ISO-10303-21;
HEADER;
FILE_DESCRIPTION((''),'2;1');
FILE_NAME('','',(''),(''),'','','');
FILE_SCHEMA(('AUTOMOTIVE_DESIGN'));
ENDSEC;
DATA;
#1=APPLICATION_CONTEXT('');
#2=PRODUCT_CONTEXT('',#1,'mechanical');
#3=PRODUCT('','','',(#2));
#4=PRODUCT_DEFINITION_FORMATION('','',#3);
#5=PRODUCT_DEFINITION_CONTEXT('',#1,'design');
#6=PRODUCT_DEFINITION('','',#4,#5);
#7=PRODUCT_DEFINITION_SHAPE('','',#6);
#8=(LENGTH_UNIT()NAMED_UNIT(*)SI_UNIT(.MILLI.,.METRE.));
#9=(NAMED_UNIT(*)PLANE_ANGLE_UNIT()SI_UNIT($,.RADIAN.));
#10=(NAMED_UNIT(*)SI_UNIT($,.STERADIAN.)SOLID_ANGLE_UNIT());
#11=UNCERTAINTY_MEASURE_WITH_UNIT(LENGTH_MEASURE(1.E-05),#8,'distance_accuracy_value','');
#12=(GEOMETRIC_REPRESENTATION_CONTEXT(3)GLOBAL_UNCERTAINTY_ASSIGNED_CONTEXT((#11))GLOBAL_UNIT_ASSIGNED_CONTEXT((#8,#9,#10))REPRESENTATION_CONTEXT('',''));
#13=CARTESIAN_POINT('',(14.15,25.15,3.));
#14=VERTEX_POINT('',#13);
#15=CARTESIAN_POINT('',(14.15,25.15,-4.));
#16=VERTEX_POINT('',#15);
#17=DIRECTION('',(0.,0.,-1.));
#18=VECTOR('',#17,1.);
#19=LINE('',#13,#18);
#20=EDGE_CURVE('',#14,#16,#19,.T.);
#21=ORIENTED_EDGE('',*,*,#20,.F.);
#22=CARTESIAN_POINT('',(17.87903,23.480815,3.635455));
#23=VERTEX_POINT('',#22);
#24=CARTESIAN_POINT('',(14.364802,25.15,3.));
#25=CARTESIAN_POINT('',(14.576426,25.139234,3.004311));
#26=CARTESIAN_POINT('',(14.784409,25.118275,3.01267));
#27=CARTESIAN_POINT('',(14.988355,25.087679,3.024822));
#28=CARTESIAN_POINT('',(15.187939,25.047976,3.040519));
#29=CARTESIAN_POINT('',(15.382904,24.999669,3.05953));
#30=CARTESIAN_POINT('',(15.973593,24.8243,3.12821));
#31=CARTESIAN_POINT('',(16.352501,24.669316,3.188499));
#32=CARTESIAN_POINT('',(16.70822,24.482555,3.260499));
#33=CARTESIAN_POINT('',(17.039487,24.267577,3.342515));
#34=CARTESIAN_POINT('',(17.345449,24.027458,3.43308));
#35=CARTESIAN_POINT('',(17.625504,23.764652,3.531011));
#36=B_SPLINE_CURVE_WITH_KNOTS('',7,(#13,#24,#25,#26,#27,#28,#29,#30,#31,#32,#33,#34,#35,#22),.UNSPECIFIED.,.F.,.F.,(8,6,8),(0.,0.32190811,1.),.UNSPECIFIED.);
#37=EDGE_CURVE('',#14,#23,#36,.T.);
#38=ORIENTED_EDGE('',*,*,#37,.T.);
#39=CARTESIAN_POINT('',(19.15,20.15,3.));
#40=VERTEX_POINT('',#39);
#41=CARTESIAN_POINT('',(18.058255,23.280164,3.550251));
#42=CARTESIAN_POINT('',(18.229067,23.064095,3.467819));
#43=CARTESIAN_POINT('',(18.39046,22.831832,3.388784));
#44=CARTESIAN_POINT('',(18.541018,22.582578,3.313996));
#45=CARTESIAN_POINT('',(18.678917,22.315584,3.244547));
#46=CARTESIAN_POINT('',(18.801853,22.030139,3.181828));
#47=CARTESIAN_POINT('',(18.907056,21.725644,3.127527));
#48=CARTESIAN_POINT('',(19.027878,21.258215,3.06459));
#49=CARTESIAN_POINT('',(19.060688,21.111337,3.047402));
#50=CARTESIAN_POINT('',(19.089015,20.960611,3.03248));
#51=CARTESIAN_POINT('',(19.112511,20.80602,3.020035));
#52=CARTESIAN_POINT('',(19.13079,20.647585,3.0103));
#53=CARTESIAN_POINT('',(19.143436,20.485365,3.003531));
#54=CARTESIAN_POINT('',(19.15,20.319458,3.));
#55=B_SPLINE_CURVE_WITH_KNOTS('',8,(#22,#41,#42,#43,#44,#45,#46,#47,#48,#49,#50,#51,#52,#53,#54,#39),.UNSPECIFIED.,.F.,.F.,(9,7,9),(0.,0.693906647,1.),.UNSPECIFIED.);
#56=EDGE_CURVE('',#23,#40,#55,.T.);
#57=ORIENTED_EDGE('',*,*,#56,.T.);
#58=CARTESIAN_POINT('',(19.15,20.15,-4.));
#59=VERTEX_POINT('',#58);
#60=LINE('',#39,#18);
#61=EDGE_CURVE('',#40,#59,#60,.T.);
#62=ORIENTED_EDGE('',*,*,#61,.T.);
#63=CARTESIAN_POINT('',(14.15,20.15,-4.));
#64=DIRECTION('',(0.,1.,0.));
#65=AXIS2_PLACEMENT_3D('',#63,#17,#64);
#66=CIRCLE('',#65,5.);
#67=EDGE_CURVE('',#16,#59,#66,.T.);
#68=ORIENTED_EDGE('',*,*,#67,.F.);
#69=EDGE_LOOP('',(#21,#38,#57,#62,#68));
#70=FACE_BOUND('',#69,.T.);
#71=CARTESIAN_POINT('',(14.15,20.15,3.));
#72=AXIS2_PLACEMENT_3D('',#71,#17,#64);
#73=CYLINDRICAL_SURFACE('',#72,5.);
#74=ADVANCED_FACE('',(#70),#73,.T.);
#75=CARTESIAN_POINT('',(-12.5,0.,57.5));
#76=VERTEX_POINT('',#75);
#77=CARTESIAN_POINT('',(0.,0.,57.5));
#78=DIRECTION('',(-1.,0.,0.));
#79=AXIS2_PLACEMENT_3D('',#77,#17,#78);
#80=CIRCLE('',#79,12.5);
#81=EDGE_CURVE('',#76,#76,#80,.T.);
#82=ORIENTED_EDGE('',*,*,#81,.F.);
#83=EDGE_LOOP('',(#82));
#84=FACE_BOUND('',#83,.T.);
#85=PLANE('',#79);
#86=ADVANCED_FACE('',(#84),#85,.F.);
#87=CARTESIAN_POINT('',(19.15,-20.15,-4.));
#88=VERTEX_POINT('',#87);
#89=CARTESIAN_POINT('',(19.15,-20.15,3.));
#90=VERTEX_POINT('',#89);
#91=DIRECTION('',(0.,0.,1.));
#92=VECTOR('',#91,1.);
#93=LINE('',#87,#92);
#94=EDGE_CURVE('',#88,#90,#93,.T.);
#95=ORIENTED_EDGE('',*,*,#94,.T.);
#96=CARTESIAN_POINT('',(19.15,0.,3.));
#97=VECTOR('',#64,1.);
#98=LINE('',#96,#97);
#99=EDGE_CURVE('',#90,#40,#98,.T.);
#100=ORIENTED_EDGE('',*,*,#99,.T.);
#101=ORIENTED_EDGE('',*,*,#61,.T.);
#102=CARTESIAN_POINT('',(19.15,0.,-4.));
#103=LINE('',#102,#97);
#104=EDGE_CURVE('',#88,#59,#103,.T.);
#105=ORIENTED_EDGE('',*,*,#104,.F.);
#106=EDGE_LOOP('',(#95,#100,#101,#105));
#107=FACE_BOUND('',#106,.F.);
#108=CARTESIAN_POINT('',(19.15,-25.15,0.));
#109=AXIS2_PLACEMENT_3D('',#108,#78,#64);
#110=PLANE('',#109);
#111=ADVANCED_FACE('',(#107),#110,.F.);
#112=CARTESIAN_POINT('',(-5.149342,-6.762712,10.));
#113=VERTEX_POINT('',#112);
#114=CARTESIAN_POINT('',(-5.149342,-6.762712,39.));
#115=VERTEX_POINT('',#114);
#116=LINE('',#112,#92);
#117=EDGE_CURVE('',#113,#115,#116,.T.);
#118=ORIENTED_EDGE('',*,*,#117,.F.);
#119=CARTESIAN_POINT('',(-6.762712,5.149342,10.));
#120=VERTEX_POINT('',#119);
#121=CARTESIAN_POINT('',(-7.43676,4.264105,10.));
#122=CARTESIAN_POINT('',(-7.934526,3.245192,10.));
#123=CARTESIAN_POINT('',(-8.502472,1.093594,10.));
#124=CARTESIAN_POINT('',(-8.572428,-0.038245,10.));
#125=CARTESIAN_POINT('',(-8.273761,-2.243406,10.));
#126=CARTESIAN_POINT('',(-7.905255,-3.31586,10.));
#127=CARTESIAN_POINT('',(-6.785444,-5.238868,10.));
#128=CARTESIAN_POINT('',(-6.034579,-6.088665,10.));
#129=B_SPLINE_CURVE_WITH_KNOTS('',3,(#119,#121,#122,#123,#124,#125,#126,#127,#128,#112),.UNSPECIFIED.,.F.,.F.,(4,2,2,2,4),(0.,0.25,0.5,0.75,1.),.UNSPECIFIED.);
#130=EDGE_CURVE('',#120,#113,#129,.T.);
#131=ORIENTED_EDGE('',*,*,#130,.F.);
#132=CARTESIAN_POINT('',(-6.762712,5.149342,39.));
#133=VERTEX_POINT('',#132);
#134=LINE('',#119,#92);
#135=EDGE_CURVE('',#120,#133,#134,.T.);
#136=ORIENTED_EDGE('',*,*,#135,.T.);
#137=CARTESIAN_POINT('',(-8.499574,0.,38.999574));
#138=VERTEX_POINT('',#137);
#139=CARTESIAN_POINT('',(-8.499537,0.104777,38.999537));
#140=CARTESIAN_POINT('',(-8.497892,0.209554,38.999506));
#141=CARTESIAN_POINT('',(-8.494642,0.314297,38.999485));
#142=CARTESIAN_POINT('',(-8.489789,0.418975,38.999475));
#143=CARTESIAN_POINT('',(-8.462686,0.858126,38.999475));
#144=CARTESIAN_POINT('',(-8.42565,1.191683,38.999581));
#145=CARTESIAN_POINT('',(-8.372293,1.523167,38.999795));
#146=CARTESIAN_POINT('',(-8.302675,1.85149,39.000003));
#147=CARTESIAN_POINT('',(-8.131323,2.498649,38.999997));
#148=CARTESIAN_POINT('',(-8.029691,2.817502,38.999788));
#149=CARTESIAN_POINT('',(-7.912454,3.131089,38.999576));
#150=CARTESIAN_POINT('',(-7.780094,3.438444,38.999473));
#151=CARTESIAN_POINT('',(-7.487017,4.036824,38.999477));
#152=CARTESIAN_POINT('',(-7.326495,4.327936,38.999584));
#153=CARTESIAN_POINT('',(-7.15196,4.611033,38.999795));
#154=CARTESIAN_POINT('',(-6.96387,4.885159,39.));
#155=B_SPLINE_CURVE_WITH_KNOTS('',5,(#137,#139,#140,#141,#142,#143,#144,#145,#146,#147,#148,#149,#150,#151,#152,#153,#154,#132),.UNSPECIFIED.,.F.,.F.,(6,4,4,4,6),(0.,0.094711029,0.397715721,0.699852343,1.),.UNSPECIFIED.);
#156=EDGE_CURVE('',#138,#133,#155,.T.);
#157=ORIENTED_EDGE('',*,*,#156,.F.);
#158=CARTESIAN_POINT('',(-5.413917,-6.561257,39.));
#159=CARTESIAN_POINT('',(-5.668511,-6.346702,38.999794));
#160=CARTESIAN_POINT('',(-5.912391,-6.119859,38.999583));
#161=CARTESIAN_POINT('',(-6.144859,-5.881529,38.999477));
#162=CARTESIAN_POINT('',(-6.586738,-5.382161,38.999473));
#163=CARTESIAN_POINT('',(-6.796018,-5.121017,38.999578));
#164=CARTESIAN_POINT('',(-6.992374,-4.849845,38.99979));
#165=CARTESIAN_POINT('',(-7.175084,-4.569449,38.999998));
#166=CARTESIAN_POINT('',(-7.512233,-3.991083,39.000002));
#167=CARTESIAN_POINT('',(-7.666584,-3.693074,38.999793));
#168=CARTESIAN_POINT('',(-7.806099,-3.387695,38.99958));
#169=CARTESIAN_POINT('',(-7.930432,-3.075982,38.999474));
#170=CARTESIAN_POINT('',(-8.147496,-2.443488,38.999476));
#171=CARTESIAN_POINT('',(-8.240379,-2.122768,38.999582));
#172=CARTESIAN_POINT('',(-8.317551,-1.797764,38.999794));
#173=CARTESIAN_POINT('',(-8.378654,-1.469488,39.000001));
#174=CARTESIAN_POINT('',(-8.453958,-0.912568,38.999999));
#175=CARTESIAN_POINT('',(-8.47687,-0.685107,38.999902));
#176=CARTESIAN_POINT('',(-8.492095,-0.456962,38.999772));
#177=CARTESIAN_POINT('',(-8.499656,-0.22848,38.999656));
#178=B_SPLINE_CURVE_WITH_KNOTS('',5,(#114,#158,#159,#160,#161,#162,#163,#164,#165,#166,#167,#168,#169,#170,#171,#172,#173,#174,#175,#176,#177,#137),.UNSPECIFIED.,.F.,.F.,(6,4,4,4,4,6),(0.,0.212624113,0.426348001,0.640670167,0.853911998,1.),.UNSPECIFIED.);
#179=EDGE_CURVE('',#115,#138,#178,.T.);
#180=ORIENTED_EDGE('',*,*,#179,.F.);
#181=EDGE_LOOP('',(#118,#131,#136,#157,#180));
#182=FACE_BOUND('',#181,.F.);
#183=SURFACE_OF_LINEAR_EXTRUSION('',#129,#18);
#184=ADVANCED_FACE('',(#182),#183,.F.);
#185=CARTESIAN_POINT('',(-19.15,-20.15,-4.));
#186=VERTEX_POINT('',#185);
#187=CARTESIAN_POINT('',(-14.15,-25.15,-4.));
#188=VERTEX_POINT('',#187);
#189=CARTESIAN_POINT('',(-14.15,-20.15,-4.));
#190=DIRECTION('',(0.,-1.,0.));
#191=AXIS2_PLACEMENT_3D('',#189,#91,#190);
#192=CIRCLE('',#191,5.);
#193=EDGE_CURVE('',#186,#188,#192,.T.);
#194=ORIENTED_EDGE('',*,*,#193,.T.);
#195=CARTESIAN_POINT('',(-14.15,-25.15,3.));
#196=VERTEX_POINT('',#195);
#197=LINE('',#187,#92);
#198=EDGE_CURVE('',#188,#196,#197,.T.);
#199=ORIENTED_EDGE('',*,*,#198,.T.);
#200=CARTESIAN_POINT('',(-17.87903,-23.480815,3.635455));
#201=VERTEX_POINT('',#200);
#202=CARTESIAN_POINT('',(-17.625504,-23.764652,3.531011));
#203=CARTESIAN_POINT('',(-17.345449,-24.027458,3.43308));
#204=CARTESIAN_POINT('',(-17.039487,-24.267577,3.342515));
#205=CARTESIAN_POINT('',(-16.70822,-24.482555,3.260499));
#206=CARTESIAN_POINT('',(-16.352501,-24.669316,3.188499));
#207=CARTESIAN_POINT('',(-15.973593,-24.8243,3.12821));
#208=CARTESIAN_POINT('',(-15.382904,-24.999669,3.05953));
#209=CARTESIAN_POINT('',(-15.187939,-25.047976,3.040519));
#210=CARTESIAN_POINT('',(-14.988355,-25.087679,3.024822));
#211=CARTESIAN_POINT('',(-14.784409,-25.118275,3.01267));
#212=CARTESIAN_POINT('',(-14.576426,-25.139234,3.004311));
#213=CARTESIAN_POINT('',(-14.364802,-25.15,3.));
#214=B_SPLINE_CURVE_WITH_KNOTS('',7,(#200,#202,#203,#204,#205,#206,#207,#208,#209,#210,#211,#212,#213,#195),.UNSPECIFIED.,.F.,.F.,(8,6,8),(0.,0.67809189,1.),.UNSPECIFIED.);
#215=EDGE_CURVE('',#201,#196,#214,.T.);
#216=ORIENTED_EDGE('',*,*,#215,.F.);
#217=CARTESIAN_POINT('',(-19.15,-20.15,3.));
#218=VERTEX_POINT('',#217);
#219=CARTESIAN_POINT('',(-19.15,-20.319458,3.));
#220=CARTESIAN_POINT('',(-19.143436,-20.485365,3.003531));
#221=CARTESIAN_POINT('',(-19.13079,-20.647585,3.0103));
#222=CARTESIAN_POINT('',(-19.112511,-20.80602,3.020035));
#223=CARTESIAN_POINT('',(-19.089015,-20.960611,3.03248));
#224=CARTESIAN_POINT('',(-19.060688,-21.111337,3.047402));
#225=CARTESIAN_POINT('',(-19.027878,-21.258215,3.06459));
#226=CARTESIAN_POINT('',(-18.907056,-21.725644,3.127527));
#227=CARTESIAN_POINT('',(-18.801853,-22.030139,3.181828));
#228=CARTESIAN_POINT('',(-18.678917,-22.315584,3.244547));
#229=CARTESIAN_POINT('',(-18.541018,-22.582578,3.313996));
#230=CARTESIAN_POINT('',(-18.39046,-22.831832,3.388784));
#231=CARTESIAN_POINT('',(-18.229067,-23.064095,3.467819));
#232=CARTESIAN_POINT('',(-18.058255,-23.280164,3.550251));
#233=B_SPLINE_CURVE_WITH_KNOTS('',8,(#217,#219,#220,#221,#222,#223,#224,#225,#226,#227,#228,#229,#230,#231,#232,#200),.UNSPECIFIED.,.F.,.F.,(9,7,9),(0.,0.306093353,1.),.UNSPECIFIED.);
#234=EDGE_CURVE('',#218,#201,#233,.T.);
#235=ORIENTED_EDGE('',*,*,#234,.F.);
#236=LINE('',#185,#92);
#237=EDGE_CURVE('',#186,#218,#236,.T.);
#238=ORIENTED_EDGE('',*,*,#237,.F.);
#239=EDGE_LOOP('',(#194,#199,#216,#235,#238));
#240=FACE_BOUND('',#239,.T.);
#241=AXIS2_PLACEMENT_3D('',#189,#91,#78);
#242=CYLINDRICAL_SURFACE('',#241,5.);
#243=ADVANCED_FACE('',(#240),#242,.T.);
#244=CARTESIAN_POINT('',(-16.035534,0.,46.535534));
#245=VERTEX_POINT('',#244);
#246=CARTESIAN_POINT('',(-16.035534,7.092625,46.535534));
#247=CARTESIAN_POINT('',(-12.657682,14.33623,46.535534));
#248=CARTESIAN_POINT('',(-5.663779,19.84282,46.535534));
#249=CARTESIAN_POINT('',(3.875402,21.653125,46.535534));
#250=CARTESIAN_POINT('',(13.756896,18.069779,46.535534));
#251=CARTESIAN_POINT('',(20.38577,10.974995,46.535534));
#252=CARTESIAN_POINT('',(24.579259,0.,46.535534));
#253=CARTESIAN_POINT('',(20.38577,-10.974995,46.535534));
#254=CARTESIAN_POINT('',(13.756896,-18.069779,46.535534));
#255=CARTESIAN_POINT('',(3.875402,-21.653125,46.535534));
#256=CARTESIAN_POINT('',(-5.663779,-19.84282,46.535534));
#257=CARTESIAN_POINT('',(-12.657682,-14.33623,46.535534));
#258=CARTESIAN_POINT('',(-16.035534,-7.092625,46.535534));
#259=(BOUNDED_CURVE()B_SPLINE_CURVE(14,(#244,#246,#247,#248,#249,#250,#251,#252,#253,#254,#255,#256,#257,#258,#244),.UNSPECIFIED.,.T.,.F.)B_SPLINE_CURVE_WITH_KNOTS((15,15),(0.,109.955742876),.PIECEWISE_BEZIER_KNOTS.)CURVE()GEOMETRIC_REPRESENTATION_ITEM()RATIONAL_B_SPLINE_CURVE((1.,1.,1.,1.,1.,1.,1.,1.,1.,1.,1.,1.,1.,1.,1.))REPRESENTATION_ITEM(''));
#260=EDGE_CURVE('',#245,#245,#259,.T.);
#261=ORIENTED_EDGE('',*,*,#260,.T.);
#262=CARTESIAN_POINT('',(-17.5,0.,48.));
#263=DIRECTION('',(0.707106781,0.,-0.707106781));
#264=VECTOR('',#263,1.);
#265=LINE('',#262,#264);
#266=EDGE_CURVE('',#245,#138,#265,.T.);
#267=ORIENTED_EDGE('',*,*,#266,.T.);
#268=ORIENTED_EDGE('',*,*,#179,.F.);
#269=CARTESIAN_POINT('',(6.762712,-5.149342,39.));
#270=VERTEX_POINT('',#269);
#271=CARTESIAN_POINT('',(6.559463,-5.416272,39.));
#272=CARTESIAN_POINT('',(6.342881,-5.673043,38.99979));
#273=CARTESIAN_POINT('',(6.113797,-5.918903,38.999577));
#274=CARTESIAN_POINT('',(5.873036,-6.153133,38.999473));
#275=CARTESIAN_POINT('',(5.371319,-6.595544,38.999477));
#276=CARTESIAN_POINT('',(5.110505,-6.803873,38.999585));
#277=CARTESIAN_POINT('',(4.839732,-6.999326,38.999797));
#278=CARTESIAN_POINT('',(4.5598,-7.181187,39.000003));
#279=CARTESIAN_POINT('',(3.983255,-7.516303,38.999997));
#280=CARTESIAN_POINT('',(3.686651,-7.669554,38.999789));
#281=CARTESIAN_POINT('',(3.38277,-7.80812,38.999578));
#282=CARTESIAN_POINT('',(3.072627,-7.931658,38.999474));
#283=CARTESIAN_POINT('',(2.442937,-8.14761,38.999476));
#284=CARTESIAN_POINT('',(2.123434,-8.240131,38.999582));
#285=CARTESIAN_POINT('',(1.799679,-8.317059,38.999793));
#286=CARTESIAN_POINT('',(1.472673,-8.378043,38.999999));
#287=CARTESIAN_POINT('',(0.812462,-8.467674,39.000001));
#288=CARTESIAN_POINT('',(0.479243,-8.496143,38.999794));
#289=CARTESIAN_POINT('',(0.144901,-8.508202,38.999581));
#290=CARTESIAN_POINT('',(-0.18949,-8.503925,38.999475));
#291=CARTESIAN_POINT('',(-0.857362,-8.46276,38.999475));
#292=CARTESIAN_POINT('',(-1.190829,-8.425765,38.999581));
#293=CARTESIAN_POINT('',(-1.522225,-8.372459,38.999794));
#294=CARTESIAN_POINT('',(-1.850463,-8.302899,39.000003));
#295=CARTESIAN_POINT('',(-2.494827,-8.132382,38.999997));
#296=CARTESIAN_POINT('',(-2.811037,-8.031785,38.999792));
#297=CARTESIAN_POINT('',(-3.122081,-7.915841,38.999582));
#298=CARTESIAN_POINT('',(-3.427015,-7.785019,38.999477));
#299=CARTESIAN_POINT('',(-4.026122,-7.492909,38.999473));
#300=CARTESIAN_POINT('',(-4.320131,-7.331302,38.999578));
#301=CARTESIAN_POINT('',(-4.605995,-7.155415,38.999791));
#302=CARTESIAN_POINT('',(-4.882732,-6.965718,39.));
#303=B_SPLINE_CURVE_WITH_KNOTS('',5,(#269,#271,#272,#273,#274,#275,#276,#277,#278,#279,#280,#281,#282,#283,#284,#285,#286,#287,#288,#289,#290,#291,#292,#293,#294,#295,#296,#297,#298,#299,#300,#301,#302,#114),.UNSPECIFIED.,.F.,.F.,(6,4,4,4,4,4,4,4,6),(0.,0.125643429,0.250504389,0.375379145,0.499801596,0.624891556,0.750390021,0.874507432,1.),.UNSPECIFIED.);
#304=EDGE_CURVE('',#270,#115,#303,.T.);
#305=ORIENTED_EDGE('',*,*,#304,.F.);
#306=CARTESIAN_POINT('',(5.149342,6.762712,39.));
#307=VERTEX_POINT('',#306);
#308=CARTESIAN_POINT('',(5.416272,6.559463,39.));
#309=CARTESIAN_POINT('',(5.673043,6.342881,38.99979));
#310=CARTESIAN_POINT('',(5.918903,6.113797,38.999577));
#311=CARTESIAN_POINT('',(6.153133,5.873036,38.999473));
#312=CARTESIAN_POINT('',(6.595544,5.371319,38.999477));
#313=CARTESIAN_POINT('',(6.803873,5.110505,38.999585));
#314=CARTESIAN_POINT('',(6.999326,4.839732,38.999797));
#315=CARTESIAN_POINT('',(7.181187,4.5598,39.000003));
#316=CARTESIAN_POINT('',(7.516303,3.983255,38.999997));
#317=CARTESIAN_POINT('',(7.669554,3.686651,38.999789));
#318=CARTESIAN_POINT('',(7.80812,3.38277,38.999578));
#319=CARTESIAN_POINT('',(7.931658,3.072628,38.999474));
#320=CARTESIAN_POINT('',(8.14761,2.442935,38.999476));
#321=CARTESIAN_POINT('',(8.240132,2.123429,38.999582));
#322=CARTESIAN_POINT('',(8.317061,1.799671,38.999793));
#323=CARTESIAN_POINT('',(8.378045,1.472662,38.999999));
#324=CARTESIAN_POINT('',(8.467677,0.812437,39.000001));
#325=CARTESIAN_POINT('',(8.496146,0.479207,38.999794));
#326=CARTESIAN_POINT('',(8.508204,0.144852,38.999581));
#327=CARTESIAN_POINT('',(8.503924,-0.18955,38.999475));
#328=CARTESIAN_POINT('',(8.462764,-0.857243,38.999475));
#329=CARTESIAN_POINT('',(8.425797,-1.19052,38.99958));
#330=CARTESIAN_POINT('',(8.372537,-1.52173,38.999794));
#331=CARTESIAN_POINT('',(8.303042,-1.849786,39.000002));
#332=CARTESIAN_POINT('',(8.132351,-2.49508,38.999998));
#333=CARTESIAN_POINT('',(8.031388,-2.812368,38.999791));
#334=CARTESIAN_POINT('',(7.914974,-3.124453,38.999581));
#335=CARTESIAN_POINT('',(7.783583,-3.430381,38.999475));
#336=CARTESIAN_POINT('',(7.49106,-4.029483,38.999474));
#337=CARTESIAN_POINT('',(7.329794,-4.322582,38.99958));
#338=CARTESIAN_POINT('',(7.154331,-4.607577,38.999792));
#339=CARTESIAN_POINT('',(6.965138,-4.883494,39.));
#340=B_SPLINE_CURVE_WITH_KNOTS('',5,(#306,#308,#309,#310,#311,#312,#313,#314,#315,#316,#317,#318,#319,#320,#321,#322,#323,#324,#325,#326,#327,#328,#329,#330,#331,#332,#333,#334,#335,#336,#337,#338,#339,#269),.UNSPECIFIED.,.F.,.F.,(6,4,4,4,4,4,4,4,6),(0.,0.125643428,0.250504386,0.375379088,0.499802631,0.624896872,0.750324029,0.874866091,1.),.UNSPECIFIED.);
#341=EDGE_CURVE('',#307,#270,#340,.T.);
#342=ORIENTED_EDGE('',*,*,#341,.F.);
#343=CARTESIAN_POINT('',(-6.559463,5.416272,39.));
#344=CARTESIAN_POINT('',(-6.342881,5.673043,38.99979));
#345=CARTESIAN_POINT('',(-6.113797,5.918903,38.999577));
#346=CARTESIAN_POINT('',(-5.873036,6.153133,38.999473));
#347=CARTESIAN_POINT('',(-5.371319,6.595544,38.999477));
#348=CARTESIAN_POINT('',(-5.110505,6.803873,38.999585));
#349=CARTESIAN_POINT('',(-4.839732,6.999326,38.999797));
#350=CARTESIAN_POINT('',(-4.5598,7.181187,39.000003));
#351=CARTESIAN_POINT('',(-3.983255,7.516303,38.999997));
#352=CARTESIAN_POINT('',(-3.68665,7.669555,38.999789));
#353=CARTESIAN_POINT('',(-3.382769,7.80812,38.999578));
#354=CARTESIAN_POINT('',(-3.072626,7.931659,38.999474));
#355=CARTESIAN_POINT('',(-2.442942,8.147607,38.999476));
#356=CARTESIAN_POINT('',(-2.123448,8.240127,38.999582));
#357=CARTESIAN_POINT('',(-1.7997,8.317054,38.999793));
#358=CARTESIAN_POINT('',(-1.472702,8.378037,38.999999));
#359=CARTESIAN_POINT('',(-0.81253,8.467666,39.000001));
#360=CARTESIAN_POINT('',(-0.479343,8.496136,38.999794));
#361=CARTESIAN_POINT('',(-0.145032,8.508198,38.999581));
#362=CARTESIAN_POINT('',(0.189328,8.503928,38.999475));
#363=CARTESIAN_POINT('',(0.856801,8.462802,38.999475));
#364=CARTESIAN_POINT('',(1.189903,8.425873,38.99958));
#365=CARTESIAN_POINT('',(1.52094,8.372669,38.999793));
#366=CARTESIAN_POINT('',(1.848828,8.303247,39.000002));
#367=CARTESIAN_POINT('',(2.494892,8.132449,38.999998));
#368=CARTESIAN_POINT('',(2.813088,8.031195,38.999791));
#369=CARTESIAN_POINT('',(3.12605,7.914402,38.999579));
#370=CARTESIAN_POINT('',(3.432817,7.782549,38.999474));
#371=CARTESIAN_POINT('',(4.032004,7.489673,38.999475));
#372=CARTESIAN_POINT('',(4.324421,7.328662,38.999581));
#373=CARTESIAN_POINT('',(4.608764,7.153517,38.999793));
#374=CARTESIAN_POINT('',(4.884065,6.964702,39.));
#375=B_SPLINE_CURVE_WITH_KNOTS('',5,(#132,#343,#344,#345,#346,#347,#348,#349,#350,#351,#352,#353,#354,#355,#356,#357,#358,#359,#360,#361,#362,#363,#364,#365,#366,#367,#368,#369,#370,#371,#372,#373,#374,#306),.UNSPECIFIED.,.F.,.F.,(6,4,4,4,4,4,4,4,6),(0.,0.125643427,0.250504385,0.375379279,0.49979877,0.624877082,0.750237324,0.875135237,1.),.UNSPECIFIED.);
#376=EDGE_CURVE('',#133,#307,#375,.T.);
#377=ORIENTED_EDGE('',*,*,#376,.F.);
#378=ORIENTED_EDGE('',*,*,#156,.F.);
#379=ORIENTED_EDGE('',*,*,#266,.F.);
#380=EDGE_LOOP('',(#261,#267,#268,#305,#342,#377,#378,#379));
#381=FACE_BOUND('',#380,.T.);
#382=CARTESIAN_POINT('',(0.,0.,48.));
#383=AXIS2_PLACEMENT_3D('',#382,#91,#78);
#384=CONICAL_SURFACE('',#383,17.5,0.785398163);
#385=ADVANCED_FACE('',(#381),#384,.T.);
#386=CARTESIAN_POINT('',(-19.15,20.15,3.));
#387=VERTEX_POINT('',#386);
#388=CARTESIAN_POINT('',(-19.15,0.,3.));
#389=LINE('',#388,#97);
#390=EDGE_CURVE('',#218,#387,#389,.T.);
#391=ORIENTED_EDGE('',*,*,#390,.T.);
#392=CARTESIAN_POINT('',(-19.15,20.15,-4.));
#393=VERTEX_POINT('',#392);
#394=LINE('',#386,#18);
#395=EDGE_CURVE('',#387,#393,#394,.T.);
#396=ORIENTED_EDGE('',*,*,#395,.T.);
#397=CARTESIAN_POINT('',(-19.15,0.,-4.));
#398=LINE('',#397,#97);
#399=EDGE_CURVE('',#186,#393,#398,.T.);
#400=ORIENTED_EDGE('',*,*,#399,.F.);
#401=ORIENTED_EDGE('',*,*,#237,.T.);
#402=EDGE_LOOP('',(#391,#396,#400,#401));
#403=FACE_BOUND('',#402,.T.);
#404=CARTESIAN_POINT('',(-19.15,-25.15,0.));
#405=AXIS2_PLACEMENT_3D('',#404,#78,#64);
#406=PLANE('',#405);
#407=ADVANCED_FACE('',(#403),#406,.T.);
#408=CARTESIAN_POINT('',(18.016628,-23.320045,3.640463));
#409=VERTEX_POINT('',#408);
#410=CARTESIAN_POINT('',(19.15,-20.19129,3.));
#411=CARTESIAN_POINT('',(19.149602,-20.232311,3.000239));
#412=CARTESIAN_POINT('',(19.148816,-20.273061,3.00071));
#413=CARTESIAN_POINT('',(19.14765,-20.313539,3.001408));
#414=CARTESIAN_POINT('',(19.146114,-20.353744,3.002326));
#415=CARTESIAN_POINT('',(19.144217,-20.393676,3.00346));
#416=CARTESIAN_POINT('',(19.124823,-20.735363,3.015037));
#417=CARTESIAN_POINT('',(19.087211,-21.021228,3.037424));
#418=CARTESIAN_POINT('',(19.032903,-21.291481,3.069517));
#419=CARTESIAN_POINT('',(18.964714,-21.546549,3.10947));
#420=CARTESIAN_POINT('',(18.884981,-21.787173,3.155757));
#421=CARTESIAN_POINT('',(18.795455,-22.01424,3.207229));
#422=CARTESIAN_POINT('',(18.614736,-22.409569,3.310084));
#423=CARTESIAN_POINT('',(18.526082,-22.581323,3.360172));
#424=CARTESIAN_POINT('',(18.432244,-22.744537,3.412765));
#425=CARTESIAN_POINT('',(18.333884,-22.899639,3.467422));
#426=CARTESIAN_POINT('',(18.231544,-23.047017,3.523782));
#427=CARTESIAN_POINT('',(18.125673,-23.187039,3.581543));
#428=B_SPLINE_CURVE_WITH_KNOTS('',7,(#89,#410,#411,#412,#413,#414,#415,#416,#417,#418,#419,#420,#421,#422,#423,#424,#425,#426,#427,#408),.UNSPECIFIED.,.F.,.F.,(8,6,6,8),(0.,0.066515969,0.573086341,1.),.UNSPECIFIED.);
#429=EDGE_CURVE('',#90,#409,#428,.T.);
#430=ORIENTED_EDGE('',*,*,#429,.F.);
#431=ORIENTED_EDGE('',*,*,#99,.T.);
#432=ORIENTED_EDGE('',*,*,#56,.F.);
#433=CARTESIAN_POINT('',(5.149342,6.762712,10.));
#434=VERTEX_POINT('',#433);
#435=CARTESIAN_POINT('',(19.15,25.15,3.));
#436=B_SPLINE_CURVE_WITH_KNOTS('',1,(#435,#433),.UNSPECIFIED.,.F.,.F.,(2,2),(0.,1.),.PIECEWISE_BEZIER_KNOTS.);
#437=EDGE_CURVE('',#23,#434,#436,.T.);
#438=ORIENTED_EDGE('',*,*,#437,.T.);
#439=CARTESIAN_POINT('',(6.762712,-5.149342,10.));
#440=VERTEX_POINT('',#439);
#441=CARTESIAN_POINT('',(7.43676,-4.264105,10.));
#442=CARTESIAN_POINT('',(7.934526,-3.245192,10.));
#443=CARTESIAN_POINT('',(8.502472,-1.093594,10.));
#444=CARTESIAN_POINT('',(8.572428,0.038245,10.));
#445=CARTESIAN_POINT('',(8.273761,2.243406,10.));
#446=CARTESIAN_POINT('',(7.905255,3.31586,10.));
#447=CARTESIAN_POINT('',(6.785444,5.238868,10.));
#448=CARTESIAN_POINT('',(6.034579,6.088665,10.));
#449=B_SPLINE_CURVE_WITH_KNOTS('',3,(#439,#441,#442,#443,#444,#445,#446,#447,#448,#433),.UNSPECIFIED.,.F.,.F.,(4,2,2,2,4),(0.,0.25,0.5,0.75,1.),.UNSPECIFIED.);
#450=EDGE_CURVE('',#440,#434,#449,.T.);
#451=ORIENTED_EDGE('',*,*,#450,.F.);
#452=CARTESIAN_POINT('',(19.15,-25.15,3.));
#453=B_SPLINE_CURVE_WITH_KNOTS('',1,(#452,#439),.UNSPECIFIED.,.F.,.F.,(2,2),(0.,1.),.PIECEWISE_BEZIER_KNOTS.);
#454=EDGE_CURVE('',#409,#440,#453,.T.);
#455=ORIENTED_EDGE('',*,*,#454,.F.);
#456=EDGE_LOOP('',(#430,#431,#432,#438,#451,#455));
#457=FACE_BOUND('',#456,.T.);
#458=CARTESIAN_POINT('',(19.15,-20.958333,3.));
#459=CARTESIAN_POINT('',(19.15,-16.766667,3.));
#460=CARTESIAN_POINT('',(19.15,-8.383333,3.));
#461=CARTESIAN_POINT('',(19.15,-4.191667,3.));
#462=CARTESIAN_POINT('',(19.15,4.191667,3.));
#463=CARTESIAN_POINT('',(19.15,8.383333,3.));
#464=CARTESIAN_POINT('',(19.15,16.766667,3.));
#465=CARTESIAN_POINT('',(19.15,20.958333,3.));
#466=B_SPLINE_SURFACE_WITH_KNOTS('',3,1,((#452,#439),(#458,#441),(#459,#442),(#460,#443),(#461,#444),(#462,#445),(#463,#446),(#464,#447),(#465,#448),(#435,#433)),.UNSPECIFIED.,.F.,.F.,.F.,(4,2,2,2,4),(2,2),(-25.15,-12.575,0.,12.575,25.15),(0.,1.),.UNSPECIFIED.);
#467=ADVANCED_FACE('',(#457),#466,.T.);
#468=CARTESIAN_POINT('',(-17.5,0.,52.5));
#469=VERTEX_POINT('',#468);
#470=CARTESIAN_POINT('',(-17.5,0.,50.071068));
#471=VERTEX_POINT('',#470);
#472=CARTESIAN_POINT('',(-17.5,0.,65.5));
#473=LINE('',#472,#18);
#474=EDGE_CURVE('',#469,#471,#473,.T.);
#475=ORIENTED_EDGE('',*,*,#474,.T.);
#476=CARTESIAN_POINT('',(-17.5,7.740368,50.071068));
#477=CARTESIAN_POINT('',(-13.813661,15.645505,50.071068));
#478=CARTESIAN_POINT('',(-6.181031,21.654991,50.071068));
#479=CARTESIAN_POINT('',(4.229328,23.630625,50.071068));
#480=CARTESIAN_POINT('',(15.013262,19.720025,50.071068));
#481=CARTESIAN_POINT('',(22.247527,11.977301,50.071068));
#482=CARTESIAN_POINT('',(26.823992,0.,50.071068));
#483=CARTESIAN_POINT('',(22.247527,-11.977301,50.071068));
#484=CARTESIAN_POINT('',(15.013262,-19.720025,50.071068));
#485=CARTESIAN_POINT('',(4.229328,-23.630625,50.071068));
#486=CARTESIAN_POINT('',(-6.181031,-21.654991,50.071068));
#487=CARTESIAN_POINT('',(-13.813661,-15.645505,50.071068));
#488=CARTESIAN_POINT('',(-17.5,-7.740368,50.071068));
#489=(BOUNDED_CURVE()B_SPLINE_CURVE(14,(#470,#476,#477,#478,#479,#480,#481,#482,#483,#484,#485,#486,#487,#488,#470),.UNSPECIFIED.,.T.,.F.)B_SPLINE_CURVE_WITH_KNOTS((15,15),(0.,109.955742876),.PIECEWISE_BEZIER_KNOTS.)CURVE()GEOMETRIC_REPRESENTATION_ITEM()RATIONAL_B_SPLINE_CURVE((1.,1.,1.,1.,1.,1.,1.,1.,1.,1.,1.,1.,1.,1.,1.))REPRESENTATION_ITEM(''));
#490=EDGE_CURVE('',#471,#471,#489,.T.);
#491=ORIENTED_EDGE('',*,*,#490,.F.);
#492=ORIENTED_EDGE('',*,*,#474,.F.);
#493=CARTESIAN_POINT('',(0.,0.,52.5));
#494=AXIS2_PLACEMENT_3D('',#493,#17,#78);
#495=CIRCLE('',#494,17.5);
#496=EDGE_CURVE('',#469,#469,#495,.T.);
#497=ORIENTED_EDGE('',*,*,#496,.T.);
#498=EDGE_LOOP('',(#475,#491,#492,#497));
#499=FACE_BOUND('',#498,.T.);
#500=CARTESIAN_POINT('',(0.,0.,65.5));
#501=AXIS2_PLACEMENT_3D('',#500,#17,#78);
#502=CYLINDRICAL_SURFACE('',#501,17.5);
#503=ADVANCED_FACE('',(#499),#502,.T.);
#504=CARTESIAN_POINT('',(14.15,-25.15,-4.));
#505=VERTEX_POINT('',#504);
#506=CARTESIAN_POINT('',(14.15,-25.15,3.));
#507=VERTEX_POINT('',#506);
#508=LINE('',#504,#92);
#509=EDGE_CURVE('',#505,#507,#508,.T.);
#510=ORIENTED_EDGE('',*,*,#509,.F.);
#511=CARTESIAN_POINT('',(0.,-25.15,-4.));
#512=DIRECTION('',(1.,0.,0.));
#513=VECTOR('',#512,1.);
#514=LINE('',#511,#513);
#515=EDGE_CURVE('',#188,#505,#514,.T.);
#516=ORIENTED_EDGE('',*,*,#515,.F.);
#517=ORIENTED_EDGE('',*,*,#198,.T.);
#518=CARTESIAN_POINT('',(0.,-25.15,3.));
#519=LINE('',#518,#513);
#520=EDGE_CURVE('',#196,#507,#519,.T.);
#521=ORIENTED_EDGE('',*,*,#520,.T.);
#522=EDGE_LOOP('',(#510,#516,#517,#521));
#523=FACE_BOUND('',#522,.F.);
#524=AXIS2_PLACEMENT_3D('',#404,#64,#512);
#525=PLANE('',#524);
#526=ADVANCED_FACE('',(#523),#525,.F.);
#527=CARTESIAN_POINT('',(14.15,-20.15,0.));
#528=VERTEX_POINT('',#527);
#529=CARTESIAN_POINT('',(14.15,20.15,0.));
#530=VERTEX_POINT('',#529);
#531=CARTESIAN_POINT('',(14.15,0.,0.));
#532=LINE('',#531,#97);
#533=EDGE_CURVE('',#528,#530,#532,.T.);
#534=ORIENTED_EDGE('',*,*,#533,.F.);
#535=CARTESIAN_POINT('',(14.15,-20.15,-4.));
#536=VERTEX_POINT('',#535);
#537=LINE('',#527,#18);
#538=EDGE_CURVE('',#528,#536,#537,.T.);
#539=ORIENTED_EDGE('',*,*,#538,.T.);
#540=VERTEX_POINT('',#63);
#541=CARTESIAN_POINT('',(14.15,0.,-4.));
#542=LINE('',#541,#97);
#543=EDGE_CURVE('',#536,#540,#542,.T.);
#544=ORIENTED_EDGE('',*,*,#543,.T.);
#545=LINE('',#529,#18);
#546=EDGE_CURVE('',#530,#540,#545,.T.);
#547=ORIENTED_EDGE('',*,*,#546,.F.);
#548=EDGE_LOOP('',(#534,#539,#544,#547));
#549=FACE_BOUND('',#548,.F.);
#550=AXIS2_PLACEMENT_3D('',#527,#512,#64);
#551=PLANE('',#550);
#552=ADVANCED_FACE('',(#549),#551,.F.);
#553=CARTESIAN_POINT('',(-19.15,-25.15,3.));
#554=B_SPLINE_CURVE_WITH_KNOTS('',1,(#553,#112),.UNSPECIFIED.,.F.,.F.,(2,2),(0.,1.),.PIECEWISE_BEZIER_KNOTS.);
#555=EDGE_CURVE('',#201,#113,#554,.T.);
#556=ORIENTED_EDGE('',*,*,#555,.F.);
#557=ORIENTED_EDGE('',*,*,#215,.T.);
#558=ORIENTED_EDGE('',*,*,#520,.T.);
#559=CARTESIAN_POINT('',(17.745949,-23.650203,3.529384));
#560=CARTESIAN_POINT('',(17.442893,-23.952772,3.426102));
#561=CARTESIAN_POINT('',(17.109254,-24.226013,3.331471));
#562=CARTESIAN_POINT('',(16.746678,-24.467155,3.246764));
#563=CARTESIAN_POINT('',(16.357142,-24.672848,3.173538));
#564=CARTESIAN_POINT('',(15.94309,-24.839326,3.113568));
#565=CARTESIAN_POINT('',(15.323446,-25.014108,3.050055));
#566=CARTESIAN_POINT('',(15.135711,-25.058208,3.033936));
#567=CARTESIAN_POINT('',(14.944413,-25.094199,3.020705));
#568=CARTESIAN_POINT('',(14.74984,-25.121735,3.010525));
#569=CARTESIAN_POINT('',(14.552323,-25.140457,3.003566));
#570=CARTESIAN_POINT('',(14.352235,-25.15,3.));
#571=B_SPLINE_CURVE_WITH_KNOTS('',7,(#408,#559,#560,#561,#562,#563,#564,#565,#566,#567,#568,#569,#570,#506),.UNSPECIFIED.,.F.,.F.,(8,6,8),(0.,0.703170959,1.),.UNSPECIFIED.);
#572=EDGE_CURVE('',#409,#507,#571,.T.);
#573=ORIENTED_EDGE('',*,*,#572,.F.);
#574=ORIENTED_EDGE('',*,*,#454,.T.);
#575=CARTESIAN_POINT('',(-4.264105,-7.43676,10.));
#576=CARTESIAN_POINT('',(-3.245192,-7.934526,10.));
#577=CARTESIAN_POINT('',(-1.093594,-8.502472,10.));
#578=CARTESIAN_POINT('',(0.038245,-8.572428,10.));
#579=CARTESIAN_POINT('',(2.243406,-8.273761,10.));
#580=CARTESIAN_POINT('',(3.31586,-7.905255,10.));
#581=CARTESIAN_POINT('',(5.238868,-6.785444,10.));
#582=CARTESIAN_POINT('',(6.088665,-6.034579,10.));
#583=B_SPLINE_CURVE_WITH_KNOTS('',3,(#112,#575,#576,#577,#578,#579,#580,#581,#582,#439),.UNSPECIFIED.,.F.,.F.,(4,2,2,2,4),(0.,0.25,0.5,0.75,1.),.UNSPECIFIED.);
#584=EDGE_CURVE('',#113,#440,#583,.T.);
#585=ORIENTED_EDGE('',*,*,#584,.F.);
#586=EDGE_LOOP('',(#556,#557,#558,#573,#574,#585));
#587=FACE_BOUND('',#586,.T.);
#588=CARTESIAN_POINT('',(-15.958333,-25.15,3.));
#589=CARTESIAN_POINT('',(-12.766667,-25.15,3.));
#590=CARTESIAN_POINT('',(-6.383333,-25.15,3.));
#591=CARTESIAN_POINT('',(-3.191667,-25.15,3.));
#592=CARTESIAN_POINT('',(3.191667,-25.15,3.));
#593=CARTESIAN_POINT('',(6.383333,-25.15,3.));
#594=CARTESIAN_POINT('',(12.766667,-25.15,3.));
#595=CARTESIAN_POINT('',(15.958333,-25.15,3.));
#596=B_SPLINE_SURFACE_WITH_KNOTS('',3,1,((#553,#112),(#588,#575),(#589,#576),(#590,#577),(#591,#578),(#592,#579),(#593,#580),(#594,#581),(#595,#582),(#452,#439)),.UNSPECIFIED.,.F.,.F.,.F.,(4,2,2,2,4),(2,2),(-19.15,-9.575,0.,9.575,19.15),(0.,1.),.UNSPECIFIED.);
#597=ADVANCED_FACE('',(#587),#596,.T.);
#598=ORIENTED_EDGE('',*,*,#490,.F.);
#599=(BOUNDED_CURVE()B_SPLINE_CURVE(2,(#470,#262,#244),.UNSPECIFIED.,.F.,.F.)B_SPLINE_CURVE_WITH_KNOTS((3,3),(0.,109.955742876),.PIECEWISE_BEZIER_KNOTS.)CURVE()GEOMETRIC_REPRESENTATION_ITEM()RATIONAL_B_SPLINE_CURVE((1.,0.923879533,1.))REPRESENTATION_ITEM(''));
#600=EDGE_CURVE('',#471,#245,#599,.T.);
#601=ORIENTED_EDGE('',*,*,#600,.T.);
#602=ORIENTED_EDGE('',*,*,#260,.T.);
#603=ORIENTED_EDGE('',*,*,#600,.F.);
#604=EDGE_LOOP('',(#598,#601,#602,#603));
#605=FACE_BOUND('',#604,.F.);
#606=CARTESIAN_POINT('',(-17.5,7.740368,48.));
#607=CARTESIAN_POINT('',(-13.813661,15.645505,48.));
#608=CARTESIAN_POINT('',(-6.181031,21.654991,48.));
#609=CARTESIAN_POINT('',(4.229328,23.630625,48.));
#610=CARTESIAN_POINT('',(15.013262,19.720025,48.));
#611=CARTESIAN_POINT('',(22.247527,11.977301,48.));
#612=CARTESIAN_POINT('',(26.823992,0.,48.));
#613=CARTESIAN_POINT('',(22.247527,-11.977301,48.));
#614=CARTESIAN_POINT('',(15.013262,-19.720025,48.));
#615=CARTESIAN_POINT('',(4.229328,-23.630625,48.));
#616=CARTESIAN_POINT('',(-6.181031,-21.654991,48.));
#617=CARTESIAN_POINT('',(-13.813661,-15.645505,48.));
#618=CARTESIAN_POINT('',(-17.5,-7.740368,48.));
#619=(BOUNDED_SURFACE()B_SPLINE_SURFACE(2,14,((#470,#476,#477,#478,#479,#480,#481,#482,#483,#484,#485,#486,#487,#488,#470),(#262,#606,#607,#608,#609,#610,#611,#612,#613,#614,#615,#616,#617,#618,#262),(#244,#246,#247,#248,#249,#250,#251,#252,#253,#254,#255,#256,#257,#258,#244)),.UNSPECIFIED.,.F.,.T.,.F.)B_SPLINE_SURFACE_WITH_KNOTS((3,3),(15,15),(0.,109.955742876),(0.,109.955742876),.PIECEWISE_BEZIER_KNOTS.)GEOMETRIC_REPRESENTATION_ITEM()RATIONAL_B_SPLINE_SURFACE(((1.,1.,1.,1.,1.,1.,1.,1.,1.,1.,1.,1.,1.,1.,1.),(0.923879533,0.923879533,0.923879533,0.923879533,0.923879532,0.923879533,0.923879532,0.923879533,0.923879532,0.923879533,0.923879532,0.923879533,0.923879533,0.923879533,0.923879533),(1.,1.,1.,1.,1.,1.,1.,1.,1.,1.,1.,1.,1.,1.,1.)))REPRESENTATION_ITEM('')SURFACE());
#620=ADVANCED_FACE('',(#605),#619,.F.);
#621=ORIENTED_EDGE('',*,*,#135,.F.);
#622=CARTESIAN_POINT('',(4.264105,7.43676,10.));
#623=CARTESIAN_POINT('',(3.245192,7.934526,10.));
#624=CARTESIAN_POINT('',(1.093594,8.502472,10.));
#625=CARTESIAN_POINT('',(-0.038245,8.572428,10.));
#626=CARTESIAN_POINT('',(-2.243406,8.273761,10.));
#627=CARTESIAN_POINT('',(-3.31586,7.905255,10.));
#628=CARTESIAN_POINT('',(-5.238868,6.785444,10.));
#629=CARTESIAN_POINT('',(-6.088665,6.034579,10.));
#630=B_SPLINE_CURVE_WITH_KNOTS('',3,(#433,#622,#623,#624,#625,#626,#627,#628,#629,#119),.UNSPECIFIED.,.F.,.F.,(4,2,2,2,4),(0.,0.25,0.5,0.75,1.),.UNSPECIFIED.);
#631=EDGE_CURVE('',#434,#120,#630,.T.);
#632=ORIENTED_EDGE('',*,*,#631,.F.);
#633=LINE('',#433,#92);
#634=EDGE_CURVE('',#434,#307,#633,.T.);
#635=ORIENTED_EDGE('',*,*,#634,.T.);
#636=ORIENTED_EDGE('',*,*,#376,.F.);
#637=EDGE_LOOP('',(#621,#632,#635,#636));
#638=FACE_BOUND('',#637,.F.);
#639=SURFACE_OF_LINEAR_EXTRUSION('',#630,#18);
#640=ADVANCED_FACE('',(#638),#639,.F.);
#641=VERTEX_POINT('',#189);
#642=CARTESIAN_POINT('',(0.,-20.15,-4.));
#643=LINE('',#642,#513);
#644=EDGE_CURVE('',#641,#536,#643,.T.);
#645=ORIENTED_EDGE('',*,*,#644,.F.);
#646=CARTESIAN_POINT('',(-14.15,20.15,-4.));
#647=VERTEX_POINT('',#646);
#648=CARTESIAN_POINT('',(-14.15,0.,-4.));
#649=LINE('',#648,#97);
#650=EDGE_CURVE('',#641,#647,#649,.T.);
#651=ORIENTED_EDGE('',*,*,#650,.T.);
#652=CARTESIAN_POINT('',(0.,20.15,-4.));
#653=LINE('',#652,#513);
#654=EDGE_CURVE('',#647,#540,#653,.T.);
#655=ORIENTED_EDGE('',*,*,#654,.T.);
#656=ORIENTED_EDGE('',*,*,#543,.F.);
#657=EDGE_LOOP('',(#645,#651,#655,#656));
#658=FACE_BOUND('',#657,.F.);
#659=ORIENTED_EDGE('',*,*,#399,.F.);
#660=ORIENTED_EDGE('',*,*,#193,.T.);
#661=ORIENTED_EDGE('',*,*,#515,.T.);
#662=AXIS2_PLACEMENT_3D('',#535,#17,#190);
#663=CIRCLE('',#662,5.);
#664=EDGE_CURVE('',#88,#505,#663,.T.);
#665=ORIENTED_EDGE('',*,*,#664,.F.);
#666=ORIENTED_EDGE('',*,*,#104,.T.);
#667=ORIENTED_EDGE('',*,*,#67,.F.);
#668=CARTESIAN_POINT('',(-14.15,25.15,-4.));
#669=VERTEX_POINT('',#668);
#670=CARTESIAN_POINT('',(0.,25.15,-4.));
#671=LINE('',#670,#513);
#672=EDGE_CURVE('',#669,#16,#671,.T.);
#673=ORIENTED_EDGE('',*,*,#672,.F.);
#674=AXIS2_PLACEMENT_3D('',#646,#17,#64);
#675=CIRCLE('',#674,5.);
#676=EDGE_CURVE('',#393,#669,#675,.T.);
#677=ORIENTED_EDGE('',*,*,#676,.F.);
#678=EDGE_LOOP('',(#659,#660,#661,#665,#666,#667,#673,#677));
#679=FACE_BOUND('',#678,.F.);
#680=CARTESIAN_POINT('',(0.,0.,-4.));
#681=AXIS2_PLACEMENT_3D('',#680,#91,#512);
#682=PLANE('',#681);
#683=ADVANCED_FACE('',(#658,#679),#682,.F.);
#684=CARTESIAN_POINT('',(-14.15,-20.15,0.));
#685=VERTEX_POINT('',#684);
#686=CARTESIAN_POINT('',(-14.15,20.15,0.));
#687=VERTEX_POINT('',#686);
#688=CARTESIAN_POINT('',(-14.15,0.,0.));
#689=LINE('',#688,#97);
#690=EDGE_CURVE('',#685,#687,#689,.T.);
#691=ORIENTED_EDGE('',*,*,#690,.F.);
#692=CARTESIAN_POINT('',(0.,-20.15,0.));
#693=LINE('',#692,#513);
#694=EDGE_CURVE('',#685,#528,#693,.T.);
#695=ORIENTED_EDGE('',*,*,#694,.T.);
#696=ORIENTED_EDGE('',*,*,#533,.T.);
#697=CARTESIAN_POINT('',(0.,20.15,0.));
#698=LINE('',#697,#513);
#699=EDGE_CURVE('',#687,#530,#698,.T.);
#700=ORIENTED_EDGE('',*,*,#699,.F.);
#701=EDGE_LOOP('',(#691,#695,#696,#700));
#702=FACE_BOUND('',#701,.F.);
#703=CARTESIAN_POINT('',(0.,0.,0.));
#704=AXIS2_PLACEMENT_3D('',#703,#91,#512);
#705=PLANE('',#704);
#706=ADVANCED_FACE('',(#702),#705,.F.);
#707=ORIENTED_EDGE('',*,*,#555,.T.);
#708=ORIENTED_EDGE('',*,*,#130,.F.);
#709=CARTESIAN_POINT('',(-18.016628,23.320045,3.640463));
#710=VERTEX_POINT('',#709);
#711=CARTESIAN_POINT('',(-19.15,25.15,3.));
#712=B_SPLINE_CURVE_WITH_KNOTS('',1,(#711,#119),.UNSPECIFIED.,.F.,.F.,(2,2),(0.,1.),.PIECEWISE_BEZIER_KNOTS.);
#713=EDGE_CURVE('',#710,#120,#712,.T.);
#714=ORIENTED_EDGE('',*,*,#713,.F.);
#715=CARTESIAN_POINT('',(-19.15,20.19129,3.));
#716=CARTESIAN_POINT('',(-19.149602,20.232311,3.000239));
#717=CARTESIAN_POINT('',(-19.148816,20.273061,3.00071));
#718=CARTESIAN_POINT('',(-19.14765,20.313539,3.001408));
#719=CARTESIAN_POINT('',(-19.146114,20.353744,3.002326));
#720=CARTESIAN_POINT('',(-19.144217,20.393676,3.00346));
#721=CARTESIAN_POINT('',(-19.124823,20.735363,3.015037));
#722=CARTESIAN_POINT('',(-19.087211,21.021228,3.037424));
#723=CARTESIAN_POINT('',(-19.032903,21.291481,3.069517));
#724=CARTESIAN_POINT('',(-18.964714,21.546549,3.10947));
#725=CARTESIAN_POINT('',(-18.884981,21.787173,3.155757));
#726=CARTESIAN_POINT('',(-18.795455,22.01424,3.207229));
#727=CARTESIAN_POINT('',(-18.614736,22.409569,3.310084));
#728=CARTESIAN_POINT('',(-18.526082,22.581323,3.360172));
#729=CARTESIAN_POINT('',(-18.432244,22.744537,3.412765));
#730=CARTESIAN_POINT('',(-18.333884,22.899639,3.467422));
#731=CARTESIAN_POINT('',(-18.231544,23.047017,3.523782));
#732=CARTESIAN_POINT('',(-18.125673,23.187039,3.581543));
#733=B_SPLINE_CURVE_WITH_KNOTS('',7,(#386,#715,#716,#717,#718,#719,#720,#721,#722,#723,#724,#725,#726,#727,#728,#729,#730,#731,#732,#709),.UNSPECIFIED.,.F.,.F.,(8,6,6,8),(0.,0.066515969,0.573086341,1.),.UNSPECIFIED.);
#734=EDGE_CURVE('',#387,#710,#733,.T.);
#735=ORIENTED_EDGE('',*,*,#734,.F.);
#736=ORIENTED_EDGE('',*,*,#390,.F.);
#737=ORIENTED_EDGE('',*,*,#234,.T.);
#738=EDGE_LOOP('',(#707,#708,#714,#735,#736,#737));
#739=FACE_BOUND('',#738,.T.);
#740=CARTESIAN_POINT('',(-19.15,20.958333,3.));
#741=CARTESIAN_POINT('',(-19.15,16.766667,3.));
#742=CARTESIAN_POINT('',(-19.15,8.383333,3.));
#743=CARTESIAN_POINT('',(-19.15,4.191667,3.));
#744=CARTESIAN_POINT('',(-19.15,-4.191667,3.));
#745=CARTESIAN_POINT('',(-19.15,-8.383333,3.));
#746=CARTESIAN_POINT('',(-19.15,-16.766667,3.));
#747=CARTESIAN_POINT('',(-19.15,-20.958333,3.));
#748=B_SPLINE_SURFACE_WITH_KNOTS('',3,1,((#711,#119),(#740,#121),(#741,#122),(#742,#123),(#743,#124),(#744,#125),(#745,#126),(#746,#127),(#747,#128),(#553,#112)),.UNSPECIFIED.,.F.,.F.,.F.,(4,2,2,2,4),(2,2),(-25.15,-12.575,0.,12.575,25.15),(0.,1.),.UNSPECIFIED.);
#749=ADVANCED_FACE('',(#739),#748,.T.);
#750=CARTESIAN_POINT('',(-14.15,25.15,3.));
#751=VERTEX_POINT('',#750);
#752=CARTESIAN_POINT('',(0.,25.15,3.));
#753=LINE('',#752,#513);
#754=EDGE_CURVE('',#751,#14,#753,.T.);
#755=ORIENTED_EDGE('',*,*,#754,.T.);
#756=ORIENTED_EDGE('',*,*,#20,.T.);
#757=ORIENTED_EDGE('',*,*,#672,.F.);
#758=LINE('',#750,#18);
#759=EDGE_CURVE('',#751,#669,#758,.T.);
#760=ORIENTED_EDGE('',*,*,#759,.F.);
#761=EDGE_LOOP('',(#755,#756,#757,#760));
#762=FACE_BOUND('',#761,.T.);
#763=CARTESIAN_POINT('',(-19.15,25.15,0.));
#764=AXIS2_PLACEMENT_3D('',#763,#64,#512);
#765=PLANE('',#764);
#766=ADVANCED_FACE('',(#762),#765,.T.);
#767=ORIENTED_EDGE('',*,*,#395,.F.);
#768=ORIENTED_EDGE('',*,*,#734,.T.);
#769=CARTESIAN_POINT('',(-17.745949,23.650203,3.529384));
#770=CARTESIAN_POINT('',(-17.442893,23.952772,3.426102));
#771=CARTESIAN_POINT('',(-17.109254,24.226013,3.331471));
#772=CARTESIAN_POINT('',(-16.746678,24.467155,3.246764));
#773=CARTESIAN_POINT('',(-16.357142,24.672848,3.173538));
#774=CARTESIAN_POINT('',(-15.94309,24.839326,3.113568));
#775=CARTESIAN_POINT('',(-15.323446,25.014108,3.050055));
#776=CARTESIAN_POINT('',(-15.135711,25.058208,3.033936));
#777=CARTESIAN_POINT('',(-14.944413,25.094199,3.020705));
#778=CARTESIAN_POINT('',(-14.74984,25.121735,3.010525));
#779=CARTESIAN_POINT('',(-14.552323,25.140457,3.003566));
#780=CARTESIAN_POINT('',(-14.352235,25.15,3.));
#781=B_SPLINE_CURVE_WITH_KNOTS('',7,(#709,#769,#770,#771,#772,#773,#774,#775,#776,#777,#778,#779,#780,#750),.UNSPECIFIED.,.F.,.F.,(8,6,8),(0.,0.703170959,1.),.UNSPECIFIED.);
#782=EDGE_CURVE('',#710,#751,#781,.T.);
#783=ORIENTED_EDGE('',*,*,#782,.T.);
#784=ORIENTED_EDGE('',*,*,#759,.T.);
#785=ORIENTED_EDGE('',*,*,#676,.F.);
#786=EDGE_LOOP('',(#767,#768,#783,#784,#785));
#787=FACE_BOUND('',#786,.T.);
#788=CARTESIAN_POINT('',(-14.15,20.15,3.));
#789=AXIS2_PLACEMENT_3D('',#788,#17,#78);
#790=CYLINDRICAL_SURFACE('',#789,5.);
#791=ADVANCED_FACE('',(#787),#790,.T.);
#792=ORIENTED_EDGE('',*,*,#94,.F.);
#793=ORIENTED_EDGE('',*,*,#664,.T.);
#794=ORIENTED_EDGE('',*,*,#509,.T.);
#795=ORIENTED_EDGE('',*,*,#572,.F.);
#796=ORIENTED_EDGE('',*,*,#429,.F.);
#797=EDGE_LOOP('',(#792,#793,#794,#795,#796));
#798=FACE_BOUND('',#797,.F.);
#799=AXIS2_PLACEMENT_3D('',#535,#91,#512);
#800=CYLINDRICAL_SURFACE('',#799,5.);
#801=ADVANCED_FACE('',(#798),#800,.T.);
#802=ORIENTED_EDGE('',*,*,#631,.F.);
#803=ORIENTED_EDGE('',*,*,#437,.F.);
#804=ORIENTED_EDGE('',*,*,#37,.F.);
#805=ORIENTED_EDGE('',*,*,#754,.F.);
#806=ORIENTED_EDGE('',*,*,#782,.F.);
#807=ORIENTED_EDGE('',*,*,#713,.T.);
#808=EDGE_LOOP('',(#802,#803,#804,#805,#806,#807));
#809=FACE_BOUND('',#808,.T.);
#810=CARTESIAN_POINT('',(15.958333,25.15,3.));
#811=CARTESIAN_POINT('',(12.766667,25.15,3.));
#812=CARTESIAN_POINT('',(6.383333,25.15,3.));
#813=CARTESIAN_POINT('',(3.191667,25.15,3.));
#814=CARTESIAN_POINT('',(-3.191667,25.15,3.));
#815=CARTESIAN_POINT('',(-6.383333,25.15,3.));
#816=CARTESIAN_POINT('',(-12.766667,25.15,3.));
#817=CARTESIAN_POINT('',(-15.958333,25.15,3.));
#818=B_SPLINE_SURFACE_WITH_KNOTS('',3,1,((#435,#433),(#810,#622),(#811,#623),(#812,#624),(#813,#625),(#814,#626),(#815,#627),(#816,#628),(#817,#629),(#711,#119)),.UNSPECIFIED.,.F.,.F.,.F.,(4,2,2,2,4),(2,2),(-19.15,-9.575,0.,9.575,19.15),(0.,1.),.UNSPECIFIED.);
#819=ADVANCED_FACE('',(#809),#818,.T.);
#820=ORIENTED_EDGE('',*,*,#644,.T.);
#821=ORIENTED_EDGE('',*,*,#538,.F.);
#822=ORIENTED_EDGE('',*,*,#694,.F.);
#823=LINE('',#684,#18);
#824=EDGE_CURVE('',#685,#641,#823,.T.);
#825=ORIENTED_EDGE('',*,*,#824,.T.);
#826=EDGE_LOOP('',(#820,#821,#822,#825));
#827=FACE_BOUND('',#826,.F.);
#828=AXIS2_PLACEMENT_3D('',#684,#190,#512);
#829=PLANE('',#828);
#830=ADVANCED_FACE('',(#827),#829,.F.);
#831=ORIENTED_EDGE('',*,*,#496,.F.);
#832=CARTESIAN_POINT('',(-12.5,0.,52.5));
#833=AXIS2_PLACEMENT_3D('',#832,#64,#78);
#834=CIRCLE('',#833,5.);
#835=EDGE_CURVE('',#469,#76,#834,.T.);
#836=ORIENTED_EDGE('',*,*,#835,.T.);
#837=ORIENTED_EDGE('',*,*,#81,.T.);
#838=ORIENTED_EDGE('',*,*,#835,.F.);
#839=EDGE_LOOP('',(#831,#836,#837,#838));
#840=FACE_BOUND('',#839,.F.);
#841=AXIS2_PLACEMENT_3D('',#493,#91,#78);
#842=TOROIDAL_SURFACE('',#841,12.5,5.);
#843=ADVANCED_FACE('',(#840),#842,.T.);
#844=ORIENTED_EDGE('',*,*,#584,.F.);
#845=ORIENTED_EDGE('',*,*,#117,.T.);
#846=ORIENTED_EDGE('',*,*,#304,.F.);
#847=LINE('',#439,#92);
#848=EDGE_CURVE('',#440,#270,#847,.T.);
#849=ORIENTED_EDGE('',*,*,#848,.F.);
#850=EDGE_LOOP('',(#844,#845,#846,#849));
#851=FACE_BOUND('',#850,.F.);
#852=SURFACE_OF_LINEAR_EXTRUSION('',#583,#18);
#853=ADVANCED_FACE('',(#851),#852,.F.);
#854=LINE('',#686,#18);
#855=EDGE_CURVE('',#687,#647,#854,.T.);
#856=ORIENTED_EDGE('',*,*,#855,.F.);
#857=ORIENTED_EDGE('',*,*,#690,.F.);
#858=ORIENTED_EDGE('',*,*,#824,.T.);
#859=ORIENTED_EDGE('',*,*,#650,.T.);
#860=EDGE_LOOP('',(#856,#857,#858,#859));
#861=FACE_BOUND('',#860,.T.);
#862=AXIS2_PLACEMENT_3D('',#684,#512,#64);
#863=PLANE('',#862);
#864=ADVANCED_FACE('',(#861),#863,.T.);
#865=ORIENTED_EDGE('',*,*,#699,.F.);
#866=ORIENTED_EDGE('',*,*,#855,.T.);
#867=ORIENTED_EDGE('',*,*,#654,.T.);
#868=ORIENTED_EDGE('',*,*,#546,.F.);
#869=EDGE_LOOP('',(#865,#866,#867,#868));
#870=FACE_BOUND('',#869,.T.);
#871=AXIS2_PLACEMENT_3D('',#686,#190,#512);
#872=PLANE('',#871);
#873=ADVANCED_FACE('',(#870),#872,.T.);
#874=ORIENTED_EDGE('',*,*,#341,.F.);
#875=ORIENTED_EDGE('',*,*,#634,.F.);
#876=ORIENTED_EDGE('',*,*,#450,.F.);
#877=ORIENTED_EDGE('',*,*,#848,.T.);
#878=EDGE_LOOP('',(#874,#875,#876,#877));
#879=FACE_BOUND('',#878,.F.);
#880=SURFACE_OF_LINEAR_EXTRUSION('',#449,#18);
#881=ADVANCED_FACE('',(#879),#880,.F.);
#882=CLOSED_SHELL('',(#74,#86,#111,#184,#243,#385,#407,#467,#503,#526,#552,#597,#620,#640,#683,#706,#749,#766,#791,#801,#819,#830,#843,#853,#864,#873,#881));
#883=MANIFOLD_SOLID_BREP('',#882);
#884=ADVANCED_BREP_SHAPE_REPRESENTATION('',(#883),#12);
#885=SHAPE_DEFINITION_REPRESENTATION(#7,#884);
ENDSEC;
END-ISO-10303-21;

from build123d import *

# Parameters (mm, degrees)
F0_W      = 38.3
F0_H      = 50.3
F0_W_2    = 28.3
F0_H_2    = 40.3
F4_DEPTH  = 4
F5_DEPTH  = 3
F5_FACE_W = 38.3
F5_FACE_H = 50.3
F7_DEPTH  = 35
F9_DEPTH  = 8
F10_R     = 5
F11_R     = 5


# Not quite as in the source:
# - the arcs of a loft's sections are written as splines that run evenly, so that the points pair up as in the source's solid


with BuildPart() as f4:
    # F0 (on Top) → F4 (new body)
    with BuildSketch(Plane.XY):
        Rectangle(F0_W, F0_H)
        Rectangle(F0_W_2, F0_H_2, mode=Mode.SUBTRACT)
    extrude(amount=-F4_DEPTH)

    # F0 (on Top) → F5 (join)
    with BuildSketch(Plane.XY):
        Rectangle(F0_W, F0_H)
        Rectangle(F0_W_2, F0_H_2, mode=Mode.SUBTRACT)
        Rectangle(F0_W_2, F0_H_2)
    extrude(amount=F5_DEPTH)

    # F5_face (on face) → F6 section 0
    with BuildSketch(Plane.XY.offset(3)):
        Rectangle(F5_FACE_W, F5_FACE_H)
    # F2 (on offset) → F6 section 1
    with BuildSketch(Plane.XY.offset(10)):
        with BuildLine():
            add(Edge.make_bspline(
                [(5.1493417049, 6.762712474), (4.2641047121, 7.436759727), (3.2451924408, 7.934526467), (1.09359433, 8.5024723272), (-0.0382449475, 8.5724279849), (-2.2434058754, 8.2737605906), (-3.3158598892, 7.9052550514), (-5.2388678728, 6.785443806), (-6.0886652211, 6.0345786977), (-6.762712474, 5.1493417049)],
                knots=[0, 0, 0, 0, 0.25, 0.25, 0.5, 0.5, 0.75, 0.75, 1, 1, 1, 1], degree=3))
            add(Edge.make_bspline(
                [(-6.762712474, 5.1493417049), (-7.436759727, 4.2641047121), (-7.934526467, 3.2451924408), (-8.5024723272, 1.09359433), (-8.5724279849, -0.0382449475), (-8.2737605906, -2.2434058754), (-7.9052550514, -3.3158598892), (-6.785443806, -5.2388678728), (-6.0345786977, -6.0886652211), (-5.1493417049, -6.762712474)],
                knots=[0, 0, 0, 0, 0.25, 0.25, 0.5, 0.5, 0.75, 0.75, 1, 1, 1, 1], degree=3))
            add(Edge.make_bspline(
                [(-5.1493417049, -6.762712474), (-4.2641047121, -7.436759727), (-3.2451924408, -7.934526467), (-1.09359433, -8.5024723272), (0.0382449475, -8.5724279849), (2.2434058754, -8.2737605906), (3.3158598892, -7.9052550514), (5.2388678728, -6.785443806), (6.0886652211, -6.0345786977), (6.762712474, -5.1493417049)],
                knots=[0, 0, 0, 0, 0.25, 0.25, 0.5, 0.5, 0.75, 0.75, 1, 1, 1, 1], degree=3))
            add(Edge.make_bspline(
                [(6.762712474, -5.1493417049), (7.436759727, -4.2641047121), (7.934526467, -3.2451924408), (8.5024723272, -1.09359433), (8.5724279849, 0.0382449475), (8.2737605906, 2.2434058754), (7.9052550514, 3.3158598892), (6.785443806, 5.2388678728), (6.0345786977, 6.0886652211), (5.1493417049, 6.762712474)],
                knots=[0, 0, 0, 0, 0.25, 0.25, 0.5, 0.5, 0.75, 0.75, 1, 1, 1, 1], degree=3))
        make_face()
    loft(ruled=True)

    # F7 (add): a face of the model
    f7_faces = [f4.faces().sort_by_distance(p)[0] for p in [
        (0, 0, 10),
    ]]
    extrude(f7_faces, amount=F7_DEPTH)

    # F3 (on Front) → F8 (revolve)
    with BuildSketch(Plane.XZ):
        with BuildLine():
            Line((0, 30.5), (0, 65.5))
            ThreePointArc((0, 65.5), (-12.3743686708, 60.3743686708), (-17.5, 48))
            Line((-17.5, 48), (0, 30.5))
        make_face()
        with BuildLine():
            ThreePointArc((-17.5, 48), (-12.3743686708, 60.3743686708), (0, 65.5))
            Line((0, 65.5), (-17.5, 65.5))
            Line((-17.5, 65.5), (-17.5, 48))
        make_face()
    revolve(axis=Axis((0, 0, 48), (0, 0, -1)))

    # F9 (cut): a face of the model
    f9_faces = [f4.faces().sort_by_distance(p)[0] for p in [
        (0, 0, 65.5),
    ]]
    extrude(f9_faces, amount=-F9_DEPTH, mode=Mode.SUBTRACT)

    # F10
    f10_edges = [f4.edges().sort_by_distance(p)[0] for p in [
        (17.5, 0, 57.5),
        (17.5, 0, 48),
    ]]
    fillet(f10_edges, radius=F10_R)

    # F11
    f11_edges = [f4.edges().sort_by_distance(p)[0] for p in [
        (-19.15, -25.15, -0.5),
        (-19.15, 25.15, -0.5),
        (19.15, 25.15, -0.5),
        (19.15, -25.15, -0.5),
    ]]
    fillet(f11_edges, radius=F11_R)


solid = f4.part
